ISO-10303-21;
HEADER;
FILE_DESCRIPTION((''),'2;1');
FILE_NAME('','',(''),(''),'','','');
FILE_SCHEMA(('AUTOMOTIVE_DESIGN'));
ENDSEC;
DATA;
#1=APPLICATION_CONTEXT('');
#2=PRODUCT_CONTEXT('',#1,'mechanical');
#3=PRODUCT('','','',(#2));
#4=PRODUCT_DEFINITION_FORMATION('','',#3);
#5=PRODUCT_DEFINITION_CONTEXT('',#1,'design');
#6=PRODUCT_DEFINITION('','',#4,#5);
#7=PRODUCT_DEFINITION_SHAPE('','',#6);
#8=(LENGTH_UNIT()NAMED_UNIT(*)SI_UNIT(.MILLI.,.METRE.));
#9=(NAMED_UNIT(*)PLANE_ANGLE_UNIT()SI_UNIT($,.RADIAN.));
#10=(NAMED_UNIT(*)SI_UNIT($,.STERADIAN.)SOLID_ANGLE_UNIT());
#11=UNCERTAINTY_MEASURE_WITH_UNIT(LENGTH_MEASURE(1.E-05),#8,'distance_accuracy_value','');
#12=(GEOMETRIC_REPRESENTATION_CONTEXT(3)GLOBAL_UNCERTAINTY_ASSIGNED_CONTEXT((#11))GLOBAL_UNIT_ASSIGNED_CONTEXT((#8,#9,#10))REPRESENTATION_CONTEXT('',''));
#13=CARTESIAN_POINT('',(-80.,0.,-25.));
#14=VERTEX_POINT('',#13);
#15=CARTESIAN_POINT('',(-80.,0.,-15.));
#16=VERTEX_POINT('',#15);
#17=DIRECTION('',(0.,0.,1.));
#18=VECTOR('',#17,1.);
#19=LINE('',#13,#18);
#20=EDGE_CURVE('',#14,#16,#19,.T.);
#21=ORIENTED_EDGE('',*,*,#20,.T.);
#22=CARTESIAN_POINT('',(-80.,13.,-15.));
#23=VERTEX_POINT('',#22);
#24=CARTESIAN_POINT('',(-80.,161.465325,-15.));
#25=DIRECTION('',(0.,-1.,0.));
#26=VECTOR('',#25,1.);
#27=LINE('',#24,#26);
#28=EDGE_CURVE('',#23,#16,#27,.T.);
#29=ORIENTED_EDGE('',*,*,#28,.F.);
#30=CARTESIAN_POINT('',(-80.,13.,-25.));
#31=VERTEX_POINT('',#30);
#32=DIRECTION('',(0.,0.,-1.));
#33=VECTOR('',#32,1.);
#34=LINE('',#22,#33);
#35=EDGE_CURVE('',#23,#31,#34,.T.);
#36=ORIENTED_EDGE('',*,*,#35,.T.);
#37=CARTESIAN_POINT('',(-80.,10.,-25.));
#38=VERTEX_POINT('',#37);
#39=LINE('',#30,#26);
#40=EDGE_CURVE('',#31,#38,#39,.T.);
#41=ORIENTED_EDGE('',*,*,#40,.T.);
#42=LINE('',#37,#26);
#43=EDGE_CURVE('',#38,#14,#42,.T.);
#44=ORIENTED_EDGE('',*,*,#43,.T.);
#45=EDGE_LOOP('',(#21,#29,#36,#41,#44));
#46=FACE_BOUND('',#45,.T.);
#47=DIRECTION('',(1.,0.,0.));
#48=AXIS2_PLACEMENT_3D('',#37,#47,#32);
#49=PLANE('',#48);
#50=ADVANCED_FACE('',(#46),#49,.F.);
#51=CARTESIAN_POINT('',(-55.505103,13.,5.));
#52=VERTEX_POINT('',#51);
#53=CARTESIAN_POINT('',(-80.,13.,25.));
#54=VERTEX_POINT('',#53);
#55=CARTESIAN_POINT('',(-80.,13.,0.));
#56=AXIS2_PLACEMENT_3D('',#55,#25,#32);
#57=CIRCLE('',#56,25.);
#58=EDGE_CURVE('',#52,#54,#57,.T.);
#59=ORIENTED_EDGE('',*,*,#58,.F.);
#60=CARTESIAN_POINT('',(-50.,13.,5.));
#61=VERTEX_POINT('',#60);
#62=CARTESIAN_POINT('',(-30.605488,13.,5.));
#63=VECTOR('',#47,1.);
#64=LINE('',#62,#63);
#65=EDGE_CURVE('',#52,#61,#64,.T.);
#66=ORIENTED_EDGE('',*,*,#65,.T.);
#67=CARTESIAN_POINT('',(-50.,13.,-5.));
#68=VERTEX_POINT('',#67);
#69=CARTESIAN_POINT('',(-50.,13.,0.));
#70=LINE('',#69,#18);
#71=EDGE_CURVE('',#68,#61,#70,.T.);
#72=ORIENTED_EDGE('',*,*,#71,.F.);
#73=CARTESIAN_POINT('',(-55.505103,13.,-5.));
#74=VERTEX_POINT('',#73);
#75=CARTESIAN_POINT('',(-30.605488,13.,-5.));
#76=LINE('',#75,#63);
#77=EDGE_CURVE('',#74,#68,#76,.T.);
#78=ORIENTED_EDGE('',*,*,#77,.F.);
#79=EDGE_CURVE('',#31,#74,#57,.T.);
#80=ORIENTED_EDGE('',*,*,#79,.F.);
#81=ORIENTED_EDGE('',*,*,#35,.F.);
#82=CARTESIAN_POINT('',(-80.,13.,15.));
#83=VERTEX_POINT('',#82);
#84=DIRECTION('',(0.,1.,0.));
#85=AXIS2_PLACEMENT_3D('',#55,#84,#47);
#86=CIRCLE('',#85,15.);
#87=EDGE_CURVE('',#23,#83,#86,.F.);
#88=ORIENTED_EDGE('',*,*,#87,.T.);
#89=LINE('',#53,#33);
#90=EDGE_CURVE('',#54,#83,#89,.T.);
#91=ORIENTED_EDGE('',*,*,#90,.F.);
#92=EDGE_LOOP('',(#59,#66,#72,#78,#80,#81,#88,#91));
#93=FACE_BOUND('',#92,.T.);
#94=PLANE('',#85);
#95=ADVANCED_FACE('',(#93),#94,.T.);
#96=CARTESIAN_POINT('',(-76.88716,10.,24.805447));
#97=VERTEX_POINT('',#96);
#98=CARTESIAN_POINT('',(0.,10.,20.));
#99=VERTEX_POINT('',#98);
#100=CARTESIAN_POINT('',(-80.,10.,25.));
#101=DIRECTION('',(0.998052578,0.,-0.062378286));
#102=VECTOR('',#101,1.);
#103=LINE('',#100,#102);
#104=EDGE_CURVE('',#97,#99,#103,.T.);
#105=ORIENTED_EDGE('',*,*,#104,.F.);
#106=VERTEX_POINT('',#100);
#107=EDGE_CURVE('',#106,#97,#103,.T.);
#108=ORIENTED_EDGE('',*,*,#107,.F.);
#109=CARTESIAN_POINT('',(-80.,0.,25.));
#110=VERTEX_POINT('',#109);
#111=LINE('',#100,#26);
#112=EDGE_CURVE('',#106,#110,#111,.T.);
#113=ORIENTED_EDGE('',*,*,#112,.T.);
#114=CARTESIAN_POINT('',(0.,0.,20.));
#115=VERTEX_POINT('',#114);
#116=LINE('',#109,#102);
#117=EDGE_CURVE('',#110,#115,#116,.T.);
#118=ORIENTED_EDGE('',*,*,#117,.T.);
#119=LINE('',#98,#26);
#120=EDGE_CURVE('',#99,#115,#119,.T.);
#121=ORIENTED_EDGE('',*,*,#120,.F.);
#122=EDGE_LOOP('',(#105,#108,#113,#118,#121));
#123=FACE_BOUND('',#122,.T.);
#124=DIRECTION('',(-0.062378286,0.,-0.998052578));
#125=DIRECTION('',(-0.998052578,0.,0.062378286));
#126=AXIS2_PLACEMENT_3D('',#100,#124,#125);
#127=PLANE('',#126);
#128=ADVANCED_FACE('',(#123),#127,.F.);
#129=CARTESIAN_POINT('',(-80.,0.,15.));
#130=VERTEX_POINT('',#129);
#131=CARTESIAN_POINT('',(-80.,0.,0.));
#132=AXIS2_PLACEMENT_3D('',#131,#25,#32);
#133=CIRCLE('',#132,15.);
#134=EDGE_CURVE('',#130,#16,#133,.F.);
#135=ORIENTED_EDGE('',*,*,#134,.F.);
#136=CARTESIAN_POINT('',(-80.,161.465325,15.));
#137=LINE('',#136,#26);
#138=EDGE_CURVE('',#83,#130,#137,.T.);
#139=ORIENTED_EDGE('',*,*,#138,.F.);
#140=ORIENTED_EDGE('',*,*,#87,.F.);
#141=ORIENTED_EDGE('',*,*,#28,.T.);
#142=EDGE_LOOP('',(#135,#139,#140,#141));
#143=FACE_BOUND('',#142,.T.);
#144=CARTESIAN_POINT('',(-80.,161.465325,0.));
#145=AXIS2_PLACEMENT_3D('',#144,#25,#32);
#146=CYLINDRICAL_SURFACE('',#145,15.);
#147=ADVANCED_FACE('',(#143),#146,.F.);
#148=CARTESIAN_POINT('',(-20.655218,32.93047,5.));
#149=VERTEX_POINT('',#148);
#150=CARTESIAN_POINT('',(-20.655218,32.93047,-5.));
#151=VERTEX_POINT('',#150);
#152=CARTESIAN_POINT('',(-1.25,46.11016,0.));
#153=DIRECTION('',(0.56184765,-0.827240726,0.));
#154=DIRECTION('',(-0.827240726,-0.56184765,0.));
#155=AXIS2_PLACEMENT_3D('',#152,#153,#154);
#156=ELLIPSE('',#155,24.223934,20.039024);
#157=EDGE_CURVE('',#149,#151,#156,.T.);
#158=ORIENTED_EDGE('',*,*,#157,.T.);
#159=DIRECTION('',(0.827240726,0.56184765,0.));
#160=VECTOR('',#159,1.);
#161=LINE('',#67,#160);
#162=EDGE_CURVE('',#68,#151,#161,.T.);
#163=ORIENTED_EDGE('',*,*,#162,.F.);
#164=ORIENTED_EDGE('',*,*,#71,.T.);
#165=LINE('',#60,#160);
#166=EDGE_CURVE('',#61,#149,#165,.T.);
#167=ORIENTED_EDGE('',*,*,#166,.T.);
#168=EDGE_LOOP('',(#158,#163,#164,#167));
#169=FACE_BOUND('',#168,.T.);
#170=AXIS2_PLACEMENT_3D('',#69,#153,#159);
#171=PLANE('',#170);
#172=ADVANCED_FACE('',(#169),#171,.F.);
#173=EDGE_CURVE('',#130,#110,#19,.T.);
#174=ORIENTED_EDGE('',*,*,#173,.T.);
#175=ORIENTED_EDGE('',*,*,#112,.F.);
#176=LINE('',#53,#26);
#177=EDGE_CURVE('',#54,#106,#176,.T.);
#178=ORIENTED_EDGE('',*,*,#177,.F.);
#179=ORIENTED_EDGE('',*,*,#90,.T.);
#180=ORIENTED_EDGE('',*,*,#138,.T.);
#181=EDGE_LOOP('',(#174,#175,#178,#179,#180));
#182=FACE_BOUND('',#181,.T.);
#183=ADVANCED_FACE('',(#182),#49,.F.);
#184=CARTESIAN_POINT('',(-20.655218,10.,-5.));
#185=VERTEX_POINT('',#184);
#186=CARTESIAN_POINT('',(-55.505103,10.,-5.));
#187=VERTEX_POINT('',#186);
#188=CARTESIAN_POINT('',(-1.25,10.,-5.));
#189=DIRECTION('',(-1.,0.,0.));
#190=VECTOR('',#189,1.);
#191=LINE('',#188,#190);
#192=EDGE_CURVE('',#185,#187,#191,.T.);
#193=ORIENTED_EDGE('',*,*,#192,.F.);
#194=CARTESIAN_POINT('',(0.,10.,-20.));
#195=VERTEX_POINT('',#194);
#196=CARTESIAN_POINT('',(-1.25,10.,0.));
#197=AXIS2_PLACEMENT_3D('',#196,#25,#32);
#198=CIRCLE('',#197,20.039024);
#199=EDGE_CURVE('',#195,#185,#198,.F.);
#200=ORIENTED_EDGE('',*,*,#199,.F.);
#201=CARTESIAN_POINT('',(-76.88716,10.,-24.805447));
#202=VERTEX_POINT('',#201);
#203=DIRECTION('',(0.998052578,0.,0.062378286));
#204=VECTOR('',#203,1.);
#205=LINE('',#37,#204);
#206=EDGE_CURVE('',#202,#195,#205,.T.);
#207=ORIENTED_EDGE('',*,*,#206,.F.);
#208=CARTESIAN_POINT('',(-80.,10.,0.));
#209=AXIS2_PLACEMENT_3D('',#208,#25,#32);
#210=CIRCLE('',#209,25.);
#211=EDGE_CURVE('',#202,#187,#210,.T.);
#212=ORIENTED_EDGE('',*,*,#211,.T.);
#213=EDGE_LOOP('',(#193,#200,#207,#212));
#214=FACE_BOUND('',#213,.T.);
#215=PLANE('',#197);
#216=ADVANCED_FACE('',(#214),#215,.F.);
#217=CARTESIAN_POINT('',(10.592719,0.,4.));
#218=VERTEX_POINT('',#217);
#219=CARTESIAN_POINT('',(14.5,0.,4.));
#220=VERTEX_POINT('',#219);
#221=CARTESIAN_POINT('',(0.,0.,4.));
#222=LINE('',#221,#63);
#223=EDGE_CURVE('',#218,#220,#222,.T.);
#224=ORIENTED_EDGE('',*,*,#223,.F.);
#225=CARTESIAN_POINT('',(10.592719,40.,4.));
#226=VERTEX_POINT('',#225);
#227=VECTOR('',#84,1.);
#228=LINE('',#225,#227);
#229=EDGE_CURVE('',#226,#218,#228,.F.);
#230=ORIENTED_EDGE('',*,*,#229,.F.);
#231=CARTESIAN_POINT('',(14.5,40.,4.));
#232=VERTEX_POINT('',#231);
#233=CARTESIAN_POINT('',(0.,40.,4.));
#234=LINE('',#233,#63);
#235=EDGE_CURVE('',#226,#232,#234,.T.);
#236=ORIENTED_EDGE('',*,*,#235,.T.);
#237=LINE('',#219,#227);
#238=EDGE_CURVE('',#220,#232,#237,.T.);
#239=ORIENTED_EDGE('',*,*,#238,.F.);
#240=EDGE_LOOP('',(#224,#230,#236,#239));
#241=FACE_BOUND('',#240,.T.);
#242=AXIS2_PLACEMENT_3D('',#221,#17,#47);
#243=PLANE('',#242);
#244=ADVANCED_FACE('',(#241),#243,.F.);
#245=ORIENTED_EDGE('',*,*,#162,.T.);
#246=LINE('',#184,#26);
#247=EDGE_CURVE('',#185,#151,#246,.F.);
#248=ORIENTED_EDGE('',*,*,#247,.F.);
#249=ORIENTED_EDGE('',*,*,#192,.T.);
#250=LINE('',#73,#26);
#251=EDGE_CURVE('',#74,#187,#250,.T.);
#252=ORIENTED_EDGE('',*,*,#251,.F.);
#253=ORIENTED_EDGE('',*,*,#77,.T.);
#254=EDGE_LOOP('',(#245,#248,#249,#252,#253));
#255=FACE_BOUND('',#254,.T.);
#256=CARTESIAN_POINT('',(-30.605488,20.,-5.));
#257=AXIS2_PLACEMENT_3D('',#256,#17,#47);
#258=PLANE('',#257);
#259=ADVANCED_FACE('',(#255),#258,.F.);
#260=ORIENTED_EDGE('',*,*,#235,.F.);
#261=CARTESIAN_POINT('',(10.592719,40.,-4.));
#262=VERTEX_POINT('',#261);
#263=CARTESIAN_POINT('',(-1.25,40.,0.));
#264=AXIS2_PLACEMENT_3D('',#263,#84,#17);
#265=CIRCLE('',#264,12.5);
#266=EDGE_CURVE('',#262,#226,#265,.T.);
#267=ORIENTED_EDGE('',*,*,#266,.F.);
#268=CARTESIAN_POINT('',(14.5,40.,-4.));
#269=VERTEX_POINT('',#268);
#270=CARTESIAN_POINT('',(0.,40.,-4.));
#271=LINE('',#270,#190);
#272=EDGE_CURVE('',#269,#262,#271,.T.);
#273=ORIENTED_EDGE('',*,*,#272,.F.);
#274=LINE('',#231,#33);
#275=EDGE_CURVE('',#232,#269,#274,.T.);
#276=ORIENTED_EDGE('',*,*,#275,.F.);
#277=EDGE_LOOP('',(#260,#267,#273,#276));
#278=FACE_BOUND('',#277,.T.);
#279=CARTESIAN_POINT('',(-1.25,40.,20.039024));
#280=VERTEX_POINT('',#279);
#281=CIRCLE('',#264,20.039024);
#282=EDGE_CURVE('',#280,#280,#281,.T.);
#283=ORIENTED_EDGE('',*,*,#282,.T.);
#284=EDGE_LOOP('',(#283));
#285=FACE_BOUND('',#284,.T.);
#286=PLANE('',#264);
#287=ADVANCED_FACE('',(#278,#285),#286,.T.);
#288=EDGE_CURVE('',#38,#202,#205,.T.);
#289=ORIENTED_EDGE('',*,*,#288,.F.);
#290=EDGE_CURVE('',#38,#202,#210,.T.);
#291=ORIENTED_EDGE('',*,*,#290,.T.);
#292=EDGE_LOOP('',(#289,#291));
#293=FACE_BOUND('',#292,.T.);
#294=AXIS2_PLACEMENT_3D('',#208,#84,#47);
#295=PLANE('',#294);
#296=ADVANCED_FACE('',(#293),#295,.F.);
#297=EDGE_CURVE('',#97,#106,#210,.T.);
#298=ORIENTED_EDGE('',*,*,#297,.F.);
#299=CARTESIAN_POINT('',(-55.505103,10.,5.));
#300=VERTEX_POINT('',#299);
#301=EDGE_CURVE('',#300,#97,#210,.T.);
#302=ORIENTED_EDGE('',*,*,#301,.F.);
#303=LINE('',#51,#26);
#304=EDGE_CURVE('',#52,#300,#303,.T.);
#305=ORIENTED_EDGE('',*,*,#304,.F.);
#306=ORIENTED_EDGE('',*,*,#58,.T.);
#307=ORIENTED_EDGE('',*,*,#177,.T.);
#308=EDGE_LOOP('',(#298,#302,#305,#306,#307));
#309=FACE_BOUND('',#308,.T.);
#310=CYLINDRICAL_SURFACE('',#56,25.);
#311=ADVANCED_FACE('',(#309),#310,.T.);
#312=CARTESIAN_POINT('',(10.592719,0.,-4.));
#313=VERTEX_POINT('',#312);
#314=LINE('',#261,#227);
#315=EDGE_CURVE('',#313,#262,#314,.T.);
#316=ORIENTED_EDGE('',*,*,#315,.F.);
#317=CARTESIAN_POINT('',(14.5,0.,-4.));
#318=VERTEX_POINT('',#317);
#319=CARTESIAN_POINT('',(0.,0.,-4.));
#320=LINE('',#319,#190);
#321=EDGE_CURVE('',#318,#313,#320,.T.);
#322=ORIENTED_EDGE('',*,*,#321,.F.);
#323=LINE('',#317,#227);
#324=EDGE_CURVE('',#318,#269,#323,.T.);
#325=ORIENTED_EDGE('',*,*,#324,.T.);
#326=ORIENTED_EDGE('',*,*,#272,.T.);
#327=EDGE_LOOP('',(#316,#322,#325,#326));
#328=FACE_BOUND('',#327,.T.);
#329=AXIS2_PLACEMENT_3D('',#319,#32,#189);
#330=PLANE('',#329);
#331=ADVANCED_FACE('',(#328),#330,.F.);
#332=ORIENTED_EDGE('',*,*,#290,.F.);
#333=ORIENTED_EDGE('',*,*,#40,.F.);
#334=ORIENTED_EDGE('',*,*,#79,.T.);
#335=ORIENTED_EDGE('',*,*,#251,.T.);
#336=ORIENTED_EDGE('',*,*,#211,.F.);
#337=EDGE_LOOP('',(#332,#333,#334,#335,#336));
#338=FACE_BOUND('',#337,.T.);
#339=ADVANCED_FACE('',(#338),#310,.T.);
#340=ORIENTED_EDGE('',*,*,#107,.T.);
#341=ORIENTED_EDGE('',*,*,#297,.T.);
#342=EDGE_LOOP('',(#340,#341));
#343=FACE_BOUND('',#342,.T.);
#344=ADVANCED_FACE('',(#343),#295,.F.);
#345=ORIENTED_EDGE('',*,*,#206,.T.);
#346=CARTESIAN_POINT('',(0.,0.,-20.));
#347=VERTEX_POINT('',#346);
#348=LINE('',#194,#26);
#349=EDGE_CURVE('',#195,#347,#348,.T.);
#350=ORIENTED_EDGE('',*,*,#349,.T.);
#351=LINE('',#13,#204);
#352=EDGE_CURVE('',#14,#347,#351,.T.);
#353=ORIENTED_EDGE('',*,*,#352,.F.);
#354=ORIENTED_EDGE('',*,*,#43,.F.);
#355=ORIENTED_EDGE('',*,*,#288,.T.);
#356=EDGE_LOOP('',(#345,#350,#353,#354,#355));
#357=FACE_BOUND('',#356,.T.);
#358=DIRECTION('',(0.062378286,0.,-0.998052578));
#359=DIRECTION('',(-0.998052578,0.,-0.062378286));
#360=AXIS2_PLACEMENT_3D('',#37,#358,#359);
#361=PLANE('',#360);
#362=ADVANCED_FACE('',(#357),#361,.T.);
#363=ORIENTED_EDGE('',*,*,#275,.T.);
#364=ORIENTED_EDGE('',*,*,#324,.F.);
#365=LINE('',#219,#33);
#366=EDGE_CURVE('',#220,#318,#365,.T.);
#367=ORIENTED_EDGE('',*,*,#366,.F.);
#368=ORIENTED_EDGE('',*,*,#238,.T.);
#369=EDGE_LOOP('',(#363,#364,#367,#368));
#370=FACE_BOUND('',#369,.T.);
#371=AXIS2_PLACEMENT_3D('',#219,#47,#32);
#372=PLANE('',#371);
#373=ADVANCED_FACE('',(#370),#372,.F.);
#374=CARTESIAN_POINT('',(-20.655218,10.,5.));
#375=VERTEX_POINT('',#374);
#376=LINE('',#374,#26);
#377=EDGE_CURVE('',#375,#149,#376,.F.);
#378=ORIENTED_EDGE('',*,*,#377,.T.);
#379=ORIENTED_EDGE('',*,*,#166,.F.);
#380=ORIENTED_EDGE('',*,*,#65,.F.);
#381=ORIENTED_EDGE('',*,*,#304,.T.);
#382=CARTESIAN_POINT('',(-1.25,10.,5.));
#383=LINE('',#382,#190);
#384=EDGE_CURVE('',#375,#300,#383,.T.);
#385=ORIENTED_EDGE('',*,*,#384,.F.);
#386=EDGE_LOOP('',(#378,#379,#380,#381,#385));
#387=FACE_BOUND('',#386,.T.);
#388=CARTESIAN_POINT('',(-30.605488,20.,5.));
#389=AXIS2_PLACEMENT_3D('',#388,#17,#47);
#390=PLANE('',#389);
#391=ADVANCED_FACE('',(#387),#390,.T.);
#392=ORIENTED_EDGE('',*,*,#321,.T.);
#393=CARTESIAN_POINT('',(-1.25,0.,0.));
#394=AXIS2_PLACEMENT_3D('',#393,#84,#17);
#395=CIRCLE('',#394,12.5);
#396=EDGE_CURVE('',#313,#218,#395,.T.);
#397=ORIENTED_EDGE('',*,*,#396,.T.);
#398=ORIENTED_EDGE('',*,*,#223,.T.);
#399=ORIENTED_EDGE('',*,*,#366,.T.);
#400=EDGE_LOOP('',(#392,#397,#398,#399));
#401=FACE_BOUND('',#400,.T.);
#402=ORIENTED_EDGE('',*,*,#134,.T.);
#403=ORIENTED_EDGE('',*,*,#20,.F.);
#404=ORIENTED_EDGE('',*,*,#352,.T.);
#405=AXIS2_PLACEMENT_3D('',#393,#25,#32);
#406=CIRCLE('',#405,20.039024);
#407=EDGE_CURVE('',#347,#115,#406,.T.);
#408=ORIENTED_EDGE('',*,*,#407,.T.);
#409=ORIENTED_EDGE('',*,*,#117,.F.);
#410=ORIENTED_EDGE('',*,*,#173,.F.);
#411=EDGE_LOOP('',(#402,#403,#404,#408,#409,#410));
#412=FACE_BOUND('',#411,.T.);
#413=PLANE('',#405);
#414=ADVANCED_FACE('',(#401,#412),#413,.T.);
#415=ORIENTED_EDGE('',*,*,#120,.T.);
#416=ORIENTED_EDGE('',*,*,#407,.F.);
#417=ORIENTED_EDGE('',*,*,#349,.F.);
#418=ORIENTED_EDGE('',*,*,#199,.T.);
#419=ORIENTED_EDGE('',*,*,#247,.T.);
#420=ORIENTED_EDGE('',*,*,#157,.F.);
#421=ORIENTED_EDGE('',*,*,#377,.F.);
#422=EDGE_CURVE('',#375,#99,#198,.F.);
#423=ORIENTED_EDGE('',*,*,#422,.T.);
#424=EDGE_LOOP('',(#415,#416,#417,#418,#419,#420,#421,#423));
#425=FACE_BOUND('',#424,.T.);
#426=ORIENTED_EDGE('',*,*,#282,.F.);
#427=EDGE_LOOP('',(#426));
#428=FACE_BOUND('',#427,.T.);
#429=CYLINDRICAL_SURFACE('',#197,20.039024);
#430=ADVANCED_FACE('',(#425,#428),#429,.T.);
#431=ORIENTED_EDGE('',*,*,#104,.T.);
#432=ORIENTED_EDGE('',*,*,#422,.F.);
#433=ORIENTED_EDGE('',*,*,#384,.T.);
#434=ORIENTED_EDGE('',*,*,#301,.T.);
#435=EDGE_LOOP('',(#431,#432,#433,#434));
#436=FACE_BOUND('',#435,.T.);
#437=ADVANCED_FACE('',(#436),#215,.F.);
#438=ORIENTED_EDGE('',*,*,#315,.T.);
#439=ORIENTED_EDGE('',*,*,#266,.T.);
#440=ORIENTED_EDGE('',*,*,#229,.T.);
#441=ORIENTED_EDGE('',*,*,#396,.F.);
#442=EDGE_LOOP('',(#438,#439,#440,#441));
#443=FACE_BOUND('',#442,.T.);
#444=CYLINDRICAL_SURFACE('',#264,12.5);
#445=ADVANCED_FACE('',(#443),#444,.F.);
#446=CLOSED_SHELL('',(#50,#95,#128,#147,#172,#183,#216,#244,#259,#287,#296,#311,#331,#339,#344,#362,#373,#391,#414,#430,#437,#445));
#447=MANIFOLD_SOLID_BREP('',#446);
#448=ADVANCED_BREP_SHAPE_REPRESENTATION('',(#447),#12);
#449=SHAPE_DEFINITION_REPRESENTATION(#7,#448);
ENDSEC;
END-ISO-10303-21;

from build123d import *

# Parameters (mm, degrees)
EXTRUDE_6_DEPTH         = 10
CUT_EXTRUDE_START       = -10
CUT_EXTRUDE_3_DEPTH     = 10
EXTRUDE_3_DEPTH         = 3
SKETCH_20_R             = 20.039024427
EXTRUDE_7_DEPTH         = 30
RIB_START               = -5
RIB_1_DEPTH             = 10
HOLE_WIZARD_25_0_25_1_D = 25
SKETCH_24_W             = 14.5
SKETCH_24_H             = 8
CUT_EXTRUDE_4_DEPTH     = 93.870878105


# Read off the part's stored shape, not the designer's step: 切除-拉伸3, 筋1
with BuildPart() as part:
    # 草图17 → 凸台-拉伸6 (new body)
    with BuildSketch(Plane(origin=(0, 0, 0), x_dir=(1, 0, 0), z_dir=(0, 1, 0))):
        with BuildLine():
            Line((-80, 25), (-80, -25))
            Line((-80, -25), (0, -20))
            ThreePointArc((0, -20), (18.789024427, 0), (0, 20))
            Line((0, 20), (-80, 25))
        make_face()
    extrude(amount=EXTRUDE_6_DEPTH)

    # 切除-拉伸3 outline → 切除-拉伸3 (cut)
    with BuildSketch(Plane(origin=(0, 10, 0), x_dir=(1, 0, 0), z_dir=(0, 1, 0)).offset(CUT_EXTRUDE_START)):
        with BuildLine():
            ThreePointArc((-80, -15), (-65, 0), (-80, 15))
            Line((-80, 15), (-80, -15))
        make_face()
    extrude(amount=CUT_EXTRUDE_3_DEPTH, mode=Mode.SUBTRACT)

    # 草图19 → 拉伸-薄壁3 (add)
    with BuildSketch(Plane(origin=(0, 10, 0), x_dir=(1, 0, 0), z_dir=(0, 1, 0))):
        with BuildLine():
            ThreePointArc((-80, 25), (-55, 0), (-80, -25))
            Line((-80, -25), (-80, -15))
            ThreePointArc((-80, -15), (-65, 0), (-80, 15))
            Line((-80, 15), (-80, 25))
        make_face()
    extrude(amount=EXTRUDE_3_DEPTH)

    # 草图20 → 凸台-拉伸7 (add)
    with BuildSketch(Plane(origin=(0, 10, 0), x_dir=(1, 0, 0), z_dir=(0, 1, 0))):
        with Locations(Location((-1.25, 0, 0), (0, 0, 86.423665625))):
            Circle(SKETCH_20_R)
    extrude(amount=EXTRUDE_7_DEPTH)

    # 筋1 outline → 筋1 (add)
    with BuildSketch(Plane.XY.offset(RIB_START)):
        Polygon((-20.65521837, 32.930470155), (-50, 13), (-57, 13), (-57, 10), (-19, 10), (-19, 34), (-19.080487844, 34), align=None)
    extrude(amount=RIB_1_DEPTH)

    # Ø25.0 (25) 直径孔1 (through all)
    with Locations(Plane(origin=(0, 40, 0), x_dir=(1, 0, 0), z_dir=(0, 1, 0))):
        with Locations((-1.25, 0)):
            Hole(HOLE_WIZARD_25_0_25_1_D / 2)

    # 草图24 → 切除-拉伸4 (cut, through all)
    with BuildSketch(Plane(origin=(0, 40, 0), x_dir=(1, 0, 0), z_dir=(0, 1, 0))):
        with Locations((7.25, 0)):
            Rectangle(SKETCH_24_W, SKETCH_24_H)
    extrude(amount=-CUT_EXTRUDE_4_DEPTH, mode=Mode.SUBTRACT)


solid = part.part
